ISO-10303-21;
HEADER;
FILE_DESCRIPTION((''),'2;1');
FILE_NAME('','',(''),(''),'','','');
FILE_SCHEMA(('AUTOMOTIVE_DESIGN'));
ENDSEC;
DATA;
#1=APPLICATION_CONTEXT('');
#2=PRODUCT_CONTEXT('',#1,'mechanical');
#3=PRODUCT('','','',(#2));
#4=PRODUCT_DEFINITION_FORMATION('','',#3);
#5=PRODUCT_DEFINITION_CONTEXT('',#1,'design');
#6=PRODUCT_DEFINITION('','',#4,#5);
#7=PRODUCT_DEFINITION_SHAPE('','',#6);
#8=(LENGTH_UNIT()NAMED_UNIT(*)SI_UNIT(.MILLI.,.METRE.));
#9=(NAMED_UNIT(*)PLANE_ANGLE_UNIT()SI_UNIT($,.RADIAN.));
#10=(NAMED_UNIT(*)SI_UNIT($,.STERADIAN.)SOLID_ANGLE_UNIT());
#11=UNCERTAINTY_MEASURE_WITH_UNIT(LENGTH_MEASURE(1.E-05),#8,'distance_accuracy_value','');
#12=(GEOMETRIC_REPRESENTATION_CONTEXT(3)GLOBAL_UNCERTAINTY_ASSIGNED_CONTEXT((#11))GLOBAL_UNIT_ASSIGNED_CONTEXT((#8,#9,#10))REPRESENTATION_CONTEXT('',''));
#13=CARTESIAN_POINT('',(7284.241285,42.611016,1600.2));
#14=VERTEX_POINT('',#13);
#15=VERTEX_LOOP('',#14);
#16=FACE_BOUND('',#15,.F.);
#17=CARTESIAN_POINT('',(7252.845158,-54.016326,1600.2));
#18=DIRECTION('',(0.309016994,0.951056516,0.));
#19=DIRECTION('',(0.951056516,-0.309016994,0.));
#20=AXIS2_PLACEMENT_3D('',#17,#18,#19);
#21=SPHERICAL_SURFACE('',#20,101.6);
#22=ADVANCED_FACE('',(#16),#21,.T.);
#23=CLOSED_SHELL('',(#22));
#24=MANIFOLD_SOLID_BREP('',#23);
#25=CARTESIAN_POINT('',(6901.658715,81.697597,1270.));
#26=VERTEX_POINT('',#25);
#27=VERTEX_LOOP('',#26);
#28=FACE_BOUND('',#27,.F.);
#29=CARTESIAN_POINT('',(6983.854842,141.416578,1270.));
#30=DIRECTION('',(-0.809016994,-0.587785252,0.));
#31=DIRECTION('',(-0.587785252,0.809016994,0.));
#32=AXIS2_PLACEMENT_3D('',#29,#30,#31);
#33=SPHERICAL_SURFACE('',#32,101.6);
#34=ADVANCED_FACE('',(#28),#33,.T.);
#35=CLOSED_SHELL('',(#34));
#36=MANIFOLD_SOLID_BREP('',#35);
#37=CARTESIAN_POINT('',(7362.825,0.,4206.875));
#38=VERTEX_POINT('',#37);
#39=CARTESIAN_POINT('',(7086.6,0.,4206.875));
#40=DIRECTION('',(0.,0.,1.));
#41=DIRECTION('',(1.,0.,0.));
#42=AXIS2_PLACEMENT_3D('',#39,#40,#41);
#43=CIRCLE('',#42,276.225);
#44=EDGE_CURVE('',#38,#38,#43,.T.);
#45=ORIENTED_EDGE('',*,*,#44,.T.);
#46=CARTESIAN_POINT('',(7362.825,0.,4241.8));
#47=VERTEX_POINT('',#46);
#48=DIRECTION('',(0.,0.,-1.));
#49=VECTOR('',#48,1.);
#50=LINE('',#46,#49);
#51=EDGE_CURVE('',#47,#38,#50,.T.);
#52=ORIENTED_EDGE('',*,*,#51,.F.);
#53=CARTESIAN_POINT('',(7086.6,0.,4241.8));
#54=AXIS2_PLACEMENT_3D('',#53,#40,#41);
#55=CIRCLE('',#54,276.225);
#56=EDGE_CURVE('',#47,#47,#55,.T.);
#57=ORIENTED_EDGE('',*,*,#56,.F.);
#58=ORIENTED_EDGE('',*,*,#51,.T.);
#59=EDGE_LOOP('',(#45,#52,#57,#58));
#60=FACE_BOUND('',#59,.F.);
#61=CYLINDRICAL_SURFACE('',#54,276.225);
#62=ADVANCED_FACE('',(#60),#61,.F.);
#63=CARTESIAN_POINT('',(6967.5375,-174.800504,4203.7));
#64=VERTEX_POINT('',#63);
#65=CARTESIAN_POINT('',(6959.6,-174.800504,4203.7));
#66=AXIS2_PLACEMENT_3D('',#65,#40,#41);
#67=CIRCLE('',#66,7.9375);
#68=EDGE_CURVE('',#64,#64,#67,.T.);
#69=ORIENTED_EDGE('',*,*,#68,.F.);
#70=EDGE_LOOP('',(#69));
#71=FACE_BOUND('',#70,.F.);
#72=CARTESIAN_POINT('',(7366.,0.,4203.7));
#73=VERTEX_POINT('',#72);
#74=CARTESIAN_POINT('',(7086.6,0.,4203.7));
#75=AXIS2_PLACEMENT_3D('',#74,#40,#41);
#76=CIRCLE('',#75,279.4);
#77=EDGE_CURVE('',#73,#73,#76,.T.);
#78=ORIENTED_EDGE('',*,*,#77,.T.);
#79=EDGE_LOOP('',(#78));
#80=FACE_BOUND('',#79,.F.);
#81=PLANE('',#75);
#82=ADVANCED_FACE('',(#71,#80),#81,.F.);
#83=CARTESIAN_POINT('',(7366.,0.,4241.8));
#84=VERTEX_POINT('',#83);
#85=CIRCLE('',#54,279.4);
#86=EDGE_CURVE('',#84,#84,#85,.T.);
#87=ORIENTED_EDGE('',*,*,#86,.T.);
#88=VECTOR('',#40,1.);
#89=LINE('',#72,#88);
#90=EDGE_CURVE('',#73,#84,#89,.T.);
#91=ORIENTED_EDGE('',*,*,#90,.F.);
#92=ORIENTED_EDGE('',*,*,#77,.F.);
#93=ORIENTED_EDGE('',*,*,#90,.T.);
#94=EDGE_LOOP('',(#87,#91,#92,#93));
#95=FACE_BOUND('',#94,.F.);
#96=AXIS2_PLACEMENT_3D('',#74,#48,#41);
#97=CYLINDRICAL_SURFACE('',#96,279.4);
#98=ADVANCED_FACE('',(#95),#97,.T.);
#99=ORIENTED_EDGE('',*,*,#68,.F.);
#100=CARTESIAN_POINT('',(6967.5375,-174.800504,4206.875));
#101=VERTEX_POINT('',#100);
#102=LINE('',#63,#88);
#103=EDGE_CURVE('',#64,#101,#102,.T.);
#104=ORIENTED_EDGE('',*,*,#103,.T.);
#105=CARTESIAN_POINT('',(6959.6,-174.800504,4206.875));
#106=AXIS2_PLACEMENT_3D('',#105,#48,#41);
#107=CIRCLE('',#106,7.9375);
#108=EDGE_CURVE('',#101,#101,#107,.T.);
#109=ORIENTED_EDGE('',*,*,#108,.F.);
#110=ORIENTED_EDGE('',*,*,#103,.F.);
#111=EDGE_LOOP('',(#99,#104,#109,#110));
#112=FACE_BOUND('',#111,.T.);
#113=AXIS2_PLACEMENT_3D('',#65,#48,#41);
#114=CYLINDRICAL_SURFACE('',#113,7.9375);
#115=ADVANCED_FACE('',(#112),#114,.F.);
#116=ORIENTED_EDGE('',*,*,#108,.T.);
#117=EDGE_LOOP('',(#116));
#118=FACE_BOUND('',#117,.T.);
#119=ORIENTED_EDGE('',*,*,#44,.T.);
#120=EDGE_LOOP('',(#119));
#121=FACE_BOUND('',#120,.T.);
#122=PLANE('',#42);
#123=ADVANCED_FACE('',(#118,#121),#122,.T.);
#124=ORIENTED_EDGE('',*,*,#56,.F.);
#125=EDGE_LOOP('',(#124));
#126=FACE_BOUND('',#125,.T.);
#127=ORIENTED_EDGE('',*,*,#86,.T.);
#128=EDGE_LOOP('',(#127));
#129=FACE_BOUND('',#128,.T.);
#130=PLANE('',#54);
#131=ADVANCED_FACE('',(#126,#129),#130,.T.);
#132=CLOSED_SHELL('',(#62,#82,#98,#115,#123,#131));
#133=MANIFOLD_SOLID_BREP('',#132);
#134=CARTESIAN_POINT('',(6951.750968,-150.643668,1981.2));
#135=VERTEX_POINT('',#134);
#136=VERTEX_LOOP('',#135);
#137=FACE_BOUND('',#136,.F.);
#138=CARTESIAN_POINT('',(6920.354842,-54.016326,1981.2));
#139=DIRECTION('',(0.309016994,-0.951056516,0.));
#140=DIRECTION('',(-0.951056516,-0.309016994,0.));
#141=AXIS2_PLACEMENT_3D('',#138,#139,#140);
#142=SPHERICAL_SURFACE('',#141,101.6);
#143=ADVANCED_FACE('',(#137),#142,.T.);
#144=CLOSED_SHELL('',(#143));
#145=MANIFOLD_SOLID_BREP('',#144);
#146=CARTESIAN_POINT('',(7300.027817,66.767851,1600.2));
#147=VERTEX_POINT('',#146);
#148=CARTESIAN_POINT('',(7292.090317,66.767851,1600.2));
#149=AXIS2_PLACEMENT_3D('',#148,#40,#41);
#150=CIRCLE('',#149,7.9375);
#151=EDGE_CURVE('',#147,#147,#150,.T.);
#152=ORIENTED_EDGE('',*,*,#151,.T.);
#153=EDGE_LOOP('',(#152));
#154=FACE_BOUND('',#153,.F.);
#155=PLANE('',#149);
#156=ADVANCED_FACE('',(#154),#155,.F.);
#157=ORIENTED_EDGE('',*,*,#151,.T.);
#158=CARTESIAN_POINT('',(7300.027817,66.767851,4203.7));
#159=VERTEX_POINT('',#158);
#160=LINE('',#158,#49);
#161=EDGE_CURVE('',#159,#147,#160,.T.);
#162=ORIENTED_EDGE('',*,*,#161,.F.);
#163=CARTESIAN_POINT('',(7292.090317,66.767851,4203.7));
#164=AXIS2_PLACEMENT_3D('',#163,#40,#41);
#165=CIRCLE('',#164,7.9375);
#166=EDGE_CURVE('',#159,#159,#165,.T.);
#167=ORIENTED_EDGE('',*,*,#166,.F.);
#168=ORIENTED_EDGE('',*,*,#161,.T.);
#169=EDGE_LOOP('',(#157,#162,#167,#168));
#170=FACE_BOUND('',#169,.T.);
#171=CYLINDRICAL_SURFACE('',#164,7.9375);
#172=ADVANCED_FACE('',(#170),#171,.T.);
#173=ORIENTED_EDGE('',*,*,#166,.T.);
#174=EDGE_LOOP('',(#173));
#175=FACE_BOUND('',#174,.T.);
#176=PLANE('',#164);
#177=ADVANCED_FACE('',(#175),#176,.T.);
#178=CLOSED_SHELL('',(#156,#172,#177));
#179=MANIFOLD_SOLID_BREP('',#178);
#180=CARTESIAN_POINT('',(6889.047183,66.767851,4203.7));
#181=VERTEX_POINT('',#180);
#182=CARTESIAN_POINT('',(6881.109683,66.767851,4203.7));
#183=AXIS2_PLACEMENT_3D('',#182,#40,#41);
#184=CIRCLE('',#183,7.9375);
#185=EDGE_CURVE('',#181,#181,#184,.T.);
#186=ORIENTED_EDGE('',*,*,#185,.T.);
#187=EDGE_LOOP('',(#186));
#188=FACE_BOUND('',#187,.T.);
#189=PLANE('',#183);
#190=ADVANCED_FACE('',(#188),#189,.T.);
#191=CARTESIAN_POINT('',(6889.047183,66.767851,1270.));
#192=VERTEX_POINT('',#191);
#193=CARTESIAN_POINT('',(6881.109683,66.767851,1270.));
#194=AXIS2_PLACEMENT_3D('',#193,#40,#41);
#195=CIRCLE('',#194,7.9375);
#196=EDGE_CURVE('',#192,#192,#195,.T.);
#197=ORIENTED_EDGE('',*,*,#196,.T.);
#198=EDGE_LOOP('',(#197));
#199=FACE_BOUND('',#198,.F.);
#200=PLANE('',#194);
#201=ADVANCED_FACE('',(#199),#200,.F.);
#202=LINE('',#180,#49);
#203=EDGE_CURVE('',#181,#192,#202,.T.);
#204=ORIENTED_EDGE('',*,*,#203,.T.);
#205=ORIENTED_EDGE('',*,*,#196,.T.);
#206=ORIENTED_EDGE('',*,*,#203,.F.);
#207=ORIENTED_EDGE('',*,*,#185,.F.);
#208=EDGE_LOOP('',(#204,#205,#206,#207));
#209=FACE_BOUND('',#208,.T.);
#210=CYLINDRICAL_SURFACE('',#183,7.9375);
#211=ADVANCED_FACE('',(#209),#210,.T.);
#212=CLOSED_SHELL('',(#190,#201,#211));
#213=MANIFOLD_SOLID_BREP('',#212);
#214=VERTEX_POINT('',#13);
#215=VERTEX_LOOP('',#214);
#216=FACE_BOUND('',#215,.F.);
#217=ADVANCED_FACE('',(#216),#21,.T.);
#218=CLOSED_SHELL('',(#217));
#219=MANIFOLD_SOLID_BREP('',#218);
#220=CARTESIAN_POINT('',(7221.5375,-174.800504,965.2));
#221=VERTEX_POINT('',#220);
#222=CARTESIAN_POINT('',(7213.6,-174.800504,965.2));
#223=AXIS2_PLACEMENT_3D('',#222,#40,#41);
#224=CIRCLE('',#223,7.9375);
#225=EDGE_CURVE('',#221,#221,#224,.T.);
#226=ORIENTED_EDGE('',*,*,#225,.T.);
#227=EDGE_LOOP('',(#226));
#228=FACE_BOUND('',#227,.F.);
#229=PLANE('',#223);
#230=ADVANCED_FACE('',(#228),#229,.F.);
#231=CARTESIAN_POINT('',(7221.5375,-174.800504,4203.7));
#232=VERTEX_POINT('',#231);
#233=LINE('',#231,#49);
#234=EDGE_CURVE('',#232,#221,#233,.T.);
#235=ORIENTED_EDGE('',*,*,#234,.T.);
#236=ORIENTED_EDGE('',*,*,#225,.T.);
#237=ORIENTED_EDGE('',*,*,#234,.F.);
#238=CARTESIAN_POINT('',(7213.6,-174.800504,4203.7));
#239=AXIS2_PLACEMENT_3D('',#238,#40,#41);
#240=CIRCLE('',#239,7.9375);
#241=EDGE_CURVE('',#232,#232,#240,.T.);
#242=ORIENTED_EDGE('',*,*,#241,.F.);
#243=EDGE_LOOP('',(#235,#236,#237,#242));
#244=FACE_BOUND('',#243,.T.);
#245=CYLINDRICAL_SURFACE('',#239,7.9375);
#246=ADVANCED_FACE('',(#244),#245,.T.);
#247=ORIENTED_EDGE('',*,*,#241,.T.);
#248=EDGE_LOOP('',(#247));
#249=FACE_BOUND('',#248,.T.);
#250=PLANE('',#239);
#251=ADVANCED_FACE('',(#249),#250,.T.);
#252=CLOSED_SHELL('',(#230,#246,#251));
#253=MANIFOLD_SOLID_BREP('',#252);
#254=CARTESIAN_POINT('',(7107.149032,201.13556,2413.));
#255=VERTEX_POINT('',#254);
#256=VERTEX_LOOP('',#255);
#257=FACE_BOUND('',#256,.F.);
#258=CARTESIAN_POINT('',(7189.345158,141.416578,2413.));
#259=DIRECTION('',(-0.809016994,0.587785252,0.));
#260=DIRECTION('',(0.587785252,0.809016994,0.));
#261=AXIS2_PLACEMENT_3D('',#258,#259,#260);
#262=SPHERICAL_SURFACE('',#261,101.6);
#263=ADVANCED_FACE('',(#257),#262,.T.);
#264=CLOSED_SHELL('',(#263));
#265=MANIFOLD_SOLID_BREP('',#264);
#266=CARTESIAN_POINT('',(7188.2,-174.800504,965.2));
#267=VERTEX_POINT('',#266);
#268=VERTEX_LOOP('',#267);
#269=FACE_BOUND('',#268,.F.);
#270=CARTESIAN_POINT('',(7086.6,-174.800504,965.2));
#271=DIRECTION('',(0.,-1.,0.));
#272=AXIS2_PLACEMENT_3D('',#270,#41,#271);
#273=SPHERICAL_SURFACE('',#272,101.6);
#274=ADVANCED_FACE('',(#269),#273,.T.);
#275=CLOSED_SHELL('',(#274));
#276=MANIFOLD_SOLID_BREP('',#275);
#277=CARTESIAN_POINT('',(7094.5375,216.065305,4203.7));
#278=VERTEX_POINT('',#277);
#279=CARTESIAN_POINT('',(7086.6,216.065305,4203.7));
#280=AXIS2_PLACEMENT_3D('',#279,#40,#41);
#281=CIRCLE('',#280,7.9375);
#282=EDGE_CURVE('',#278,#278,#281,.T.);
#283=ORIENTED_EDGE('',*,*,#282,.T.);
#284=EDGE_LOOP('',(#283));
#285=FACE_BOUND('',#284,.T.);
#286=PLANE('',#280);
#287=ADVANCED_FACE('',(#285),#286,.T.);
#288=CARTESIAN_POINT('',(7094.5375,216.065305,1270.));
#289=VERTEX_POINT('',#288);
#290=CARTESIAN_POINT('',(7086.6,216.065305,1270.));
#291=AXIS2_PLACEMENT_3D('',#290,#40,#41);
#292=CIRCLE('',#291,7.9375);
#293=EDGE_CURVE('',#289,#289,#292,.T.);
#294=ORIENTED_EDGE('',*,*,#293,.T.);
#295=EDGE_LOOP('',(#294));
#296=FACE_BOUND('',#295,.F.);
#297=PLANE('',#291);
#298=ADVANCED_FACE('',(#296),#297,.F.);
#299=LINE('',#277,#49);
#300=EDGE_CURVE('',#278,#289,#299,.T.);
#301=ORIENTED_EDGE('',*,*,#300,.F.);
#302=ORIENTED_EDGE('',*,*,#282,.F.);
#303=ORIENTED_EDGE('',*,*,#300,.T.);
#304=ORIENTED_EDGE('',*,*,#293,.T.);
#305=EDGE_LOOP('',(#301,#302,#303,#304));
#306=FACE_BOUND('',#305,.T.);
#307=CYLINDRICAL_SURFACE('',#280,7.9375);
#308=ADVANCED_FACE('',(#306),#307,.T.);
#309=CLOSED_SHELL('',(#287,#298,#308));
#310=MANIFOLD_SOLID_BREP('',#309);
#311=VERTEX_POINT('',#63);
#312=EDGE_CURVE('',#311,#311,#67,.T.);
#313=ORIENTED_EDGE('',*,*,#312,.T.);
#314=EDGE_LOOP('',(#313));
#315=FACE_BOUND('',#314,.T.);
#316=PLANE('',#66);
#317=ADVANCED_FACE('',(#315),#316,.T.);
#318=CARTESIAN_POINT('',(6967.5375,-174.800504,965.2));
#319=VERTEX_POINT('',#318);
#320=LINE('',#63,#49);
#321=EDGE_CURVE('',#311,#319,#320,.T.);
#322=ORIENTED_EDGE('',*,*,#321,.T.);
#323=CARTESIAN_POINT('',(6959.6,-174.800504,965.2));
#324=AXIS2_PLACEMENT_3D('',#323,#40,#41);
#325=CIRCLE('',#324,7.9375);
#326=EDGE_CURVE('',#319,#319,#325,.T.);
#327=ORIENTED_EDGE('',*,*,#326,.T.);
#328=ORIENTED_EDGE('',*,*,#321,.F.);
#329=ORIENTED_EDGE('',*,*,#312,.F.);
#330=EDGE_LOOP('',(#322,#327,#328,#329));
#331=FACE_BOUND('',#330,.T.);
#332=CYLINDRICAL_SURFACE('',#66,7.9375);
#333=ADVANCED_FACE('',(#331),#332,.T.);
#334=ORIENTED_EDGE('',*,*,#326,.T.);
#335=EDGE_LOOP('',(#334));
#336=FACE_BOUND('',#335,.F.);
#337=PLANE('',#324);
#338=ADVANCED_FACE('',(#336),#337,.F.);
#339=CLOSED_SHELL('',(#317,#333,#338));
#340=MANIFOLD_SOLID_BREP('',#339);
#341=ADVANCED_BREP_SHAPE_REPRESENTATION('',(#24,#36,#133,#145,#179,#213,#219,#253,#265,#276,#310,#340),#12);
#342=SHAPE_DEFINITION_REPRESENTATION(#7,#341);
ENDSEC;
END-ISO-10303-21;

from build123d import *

# Parameters (mm, degrees)
F7_R      = 7.9375
F8_DEPTH  = 3238.5
F13_DEPTH = 2933.7
F14_DEPTH = 2603.5
F27_R     = 279.4
F27_R_2   = 7.9375
F28_DEPTH = 38.1
F29_R     = 276.225
F30_DEPTH = 34.925


with BuildPart() as f8:
    # F7 (on plane+point) → F8 (new body, through all)
    with BuildSketch(Plane.XY.offset(4203.7)):
        with Locations((7213.6, -174.8005038998)):
            Circle(F7_R)
    extrude(amount=-F8_DEPTH)


with BuildPart() as f8b:
    # F7 (on plane+point) → F8, piece 2 (new body, through all)
    with BuildSketch(Plane.XY.offset(4203.7)):
        with Locations((6959.6, -174.8005038998)):
            Circle(F7_R)
    extrude(amount=-F8_DEPTH)


with BuildPart() as f13:
    # F7 (on plane+point) → F13 (new body, through all)
    with BuildSketch(Plane.XY.offset(4203.7)):
        with Locations((6881.1096834288, 66.7678512391)):
            Circle(F7_R)
    extrude(amount=-F13_DEPTH)


with BuildPart() as f13b:
    # F7 (on plane+point) → F13, piece 2 (new body, through all)
    with BuildSketch(Plane.XY.offset(4203.7)):
        with Locations((7086.6, 216.0653053214)):
            Circle(F7_R)
    extrude(amount=-F13_DEPTH)


with BuildPart() as f14:
    # F7 (on plane+point) → F14 (new body, through all)
    with BuildSketch(Plane.XY.offset(4203.7)):
        with Locations((7292.0903165712, 66.7678512391)):
            Circle(F7_R)
    extrude(amount=-F14_DEPTH)


with BuildPart() as f16:
    # F15 (on plane+point) → F16 (revolve)
    with BuildSketch(Plane.XY.offset(965.2)):
        with BuildLine():
            ThreePointArc((6985, -174.8005038998), (7086.6, -276.4005038998), (7188.2, -174.8005038998))
            Line((7188.2, -174.8005038998), (6985, -174.8005038998))
        make_face()
    revolve(axis=Axis((7086.6, -174.8005038998, 965.2), (-1, 0, 0)))


with BuildPart() as f18:
    # F17 (on plane+point) → F18 (revolve)
    with BuildSketch(Plane.XY.offset(1981.2)):
        with BuildLine():
            ThreePointArc((6888.9587150859, 42.6110157252), (6823.7274996588, -85.4124529589), (6951.7509683429, -150.6436683859))
            Line((6951.7509683429, -150.6436683859), (6888.9587150859, 42.6110157252))
        make_face()
    revolve(axis=Axis((6920.3548417144, -54.0163263304, 1981.2), (-0.3090169944, 0.9510565163, 0)))


with BuildPart() as f20:
    # F19 (on plane+point) → F20 (revolve)
    with BuildSketch(Plane.XY.offset(1270)):
        with BuildLine():
            ThreePointArc((7066.0509683429, 201.1355599132), (6924.1358600815, 223.6127049088), (6901.6587150859, 81.6975966474))
            Line((6901.6587150859, 81.6975966474), (7066.0509683429, 201.1355599132))
        make_face()
    revolve(axis=Axis((6983.8548417144, 141.4165782803, 1270), (0.8090169944, 0.5877852523, 0)))


with BuildPart() as f22:
    # F21 (on plane+point) → F22 (revolve)
    with BuildSketch(Plane.XY.offset(2413)):
        with BuildLine():
            ThreePointArc((7271.5412849141, 81.6975966474), (7249.0641399185, 223.6127049088), (7107.1490316571, 201.1355599132))
            Line((7107.1490316571, 201.1355599132), (7271.5412849141, 81.6975966474))
        make_face()
    revolve(axis=Axis((7189.3451582856, 141.4165782803, 2413), (0.8090169944, -0.5877852523, 0)))


with BuildPart() as f24:
    # F23 (on plane+point) → F24 (revolve)
    with BuildSketch(Plane.XY.offset(1600.2)):
        with BuildLine():
            ThreePointArc((7221.4490316571, -150.6436683859), (7349.4725003412, -85.4124529588), (7284.2412849141, 42.6110157252))
            Line((7284.2412849141, 42.6110157252), (7221.4490316571, -150.6436683859))
        make_face()
    revolve(axis=Axis((7252.8451582856, -54.0163263304, 1600.2), (-0.3090169944, -0.9510565163, 0)))


with BuildPart() as f26:
    # F23 (on plane+point) → F26 (revolve)
    with BuildSketch(Plane.XY.offset(1600.2)):
        with BuildLine():
            ThreePointArc((7221.4490316571, -150.6436683859), (7349.4725003412, -85.4124529588), (7284.2412849141, 42.6110157252))
            Line((7284.2412849141, 42.6110157252), (7221.4490316571, -150.6436683859))
        make_face()
    revolve(axis=Axis((7252.8451582856, -54.0163263304, 1600.2), (-0.3090169944, -0.9510565163, 0)))


with BuildPart() as f28:
    # F27 (on face) → F28 (new body)
    with BuildSketch(Plane.XY.offset(4203.7)):
        with Locations((7086.6, 0)):
            Circle(F27_R)
        with Locations((6959.6, -174.8005038998)):
            Circle(F27_R_2, mode=Mode.SUBTRACT)
    extrude(amount=F28_DEPTH)

    # F29 (on face) → F30 (cut)
    with BuildSketch(Plane.XY.offset(4241.8)):
        with Locations((7086.6, 0)):
            Circle(F29_R)
    extrude(amount=-F30_DEPTH, mode=Mode.SUBTRACT)


solid = Compound([f8.part, f8b.part, f13.part, f13b.part, f14.part, f16.part, f18.part, f20.part, f22.part, f24.part, f26.part, f28.part])
